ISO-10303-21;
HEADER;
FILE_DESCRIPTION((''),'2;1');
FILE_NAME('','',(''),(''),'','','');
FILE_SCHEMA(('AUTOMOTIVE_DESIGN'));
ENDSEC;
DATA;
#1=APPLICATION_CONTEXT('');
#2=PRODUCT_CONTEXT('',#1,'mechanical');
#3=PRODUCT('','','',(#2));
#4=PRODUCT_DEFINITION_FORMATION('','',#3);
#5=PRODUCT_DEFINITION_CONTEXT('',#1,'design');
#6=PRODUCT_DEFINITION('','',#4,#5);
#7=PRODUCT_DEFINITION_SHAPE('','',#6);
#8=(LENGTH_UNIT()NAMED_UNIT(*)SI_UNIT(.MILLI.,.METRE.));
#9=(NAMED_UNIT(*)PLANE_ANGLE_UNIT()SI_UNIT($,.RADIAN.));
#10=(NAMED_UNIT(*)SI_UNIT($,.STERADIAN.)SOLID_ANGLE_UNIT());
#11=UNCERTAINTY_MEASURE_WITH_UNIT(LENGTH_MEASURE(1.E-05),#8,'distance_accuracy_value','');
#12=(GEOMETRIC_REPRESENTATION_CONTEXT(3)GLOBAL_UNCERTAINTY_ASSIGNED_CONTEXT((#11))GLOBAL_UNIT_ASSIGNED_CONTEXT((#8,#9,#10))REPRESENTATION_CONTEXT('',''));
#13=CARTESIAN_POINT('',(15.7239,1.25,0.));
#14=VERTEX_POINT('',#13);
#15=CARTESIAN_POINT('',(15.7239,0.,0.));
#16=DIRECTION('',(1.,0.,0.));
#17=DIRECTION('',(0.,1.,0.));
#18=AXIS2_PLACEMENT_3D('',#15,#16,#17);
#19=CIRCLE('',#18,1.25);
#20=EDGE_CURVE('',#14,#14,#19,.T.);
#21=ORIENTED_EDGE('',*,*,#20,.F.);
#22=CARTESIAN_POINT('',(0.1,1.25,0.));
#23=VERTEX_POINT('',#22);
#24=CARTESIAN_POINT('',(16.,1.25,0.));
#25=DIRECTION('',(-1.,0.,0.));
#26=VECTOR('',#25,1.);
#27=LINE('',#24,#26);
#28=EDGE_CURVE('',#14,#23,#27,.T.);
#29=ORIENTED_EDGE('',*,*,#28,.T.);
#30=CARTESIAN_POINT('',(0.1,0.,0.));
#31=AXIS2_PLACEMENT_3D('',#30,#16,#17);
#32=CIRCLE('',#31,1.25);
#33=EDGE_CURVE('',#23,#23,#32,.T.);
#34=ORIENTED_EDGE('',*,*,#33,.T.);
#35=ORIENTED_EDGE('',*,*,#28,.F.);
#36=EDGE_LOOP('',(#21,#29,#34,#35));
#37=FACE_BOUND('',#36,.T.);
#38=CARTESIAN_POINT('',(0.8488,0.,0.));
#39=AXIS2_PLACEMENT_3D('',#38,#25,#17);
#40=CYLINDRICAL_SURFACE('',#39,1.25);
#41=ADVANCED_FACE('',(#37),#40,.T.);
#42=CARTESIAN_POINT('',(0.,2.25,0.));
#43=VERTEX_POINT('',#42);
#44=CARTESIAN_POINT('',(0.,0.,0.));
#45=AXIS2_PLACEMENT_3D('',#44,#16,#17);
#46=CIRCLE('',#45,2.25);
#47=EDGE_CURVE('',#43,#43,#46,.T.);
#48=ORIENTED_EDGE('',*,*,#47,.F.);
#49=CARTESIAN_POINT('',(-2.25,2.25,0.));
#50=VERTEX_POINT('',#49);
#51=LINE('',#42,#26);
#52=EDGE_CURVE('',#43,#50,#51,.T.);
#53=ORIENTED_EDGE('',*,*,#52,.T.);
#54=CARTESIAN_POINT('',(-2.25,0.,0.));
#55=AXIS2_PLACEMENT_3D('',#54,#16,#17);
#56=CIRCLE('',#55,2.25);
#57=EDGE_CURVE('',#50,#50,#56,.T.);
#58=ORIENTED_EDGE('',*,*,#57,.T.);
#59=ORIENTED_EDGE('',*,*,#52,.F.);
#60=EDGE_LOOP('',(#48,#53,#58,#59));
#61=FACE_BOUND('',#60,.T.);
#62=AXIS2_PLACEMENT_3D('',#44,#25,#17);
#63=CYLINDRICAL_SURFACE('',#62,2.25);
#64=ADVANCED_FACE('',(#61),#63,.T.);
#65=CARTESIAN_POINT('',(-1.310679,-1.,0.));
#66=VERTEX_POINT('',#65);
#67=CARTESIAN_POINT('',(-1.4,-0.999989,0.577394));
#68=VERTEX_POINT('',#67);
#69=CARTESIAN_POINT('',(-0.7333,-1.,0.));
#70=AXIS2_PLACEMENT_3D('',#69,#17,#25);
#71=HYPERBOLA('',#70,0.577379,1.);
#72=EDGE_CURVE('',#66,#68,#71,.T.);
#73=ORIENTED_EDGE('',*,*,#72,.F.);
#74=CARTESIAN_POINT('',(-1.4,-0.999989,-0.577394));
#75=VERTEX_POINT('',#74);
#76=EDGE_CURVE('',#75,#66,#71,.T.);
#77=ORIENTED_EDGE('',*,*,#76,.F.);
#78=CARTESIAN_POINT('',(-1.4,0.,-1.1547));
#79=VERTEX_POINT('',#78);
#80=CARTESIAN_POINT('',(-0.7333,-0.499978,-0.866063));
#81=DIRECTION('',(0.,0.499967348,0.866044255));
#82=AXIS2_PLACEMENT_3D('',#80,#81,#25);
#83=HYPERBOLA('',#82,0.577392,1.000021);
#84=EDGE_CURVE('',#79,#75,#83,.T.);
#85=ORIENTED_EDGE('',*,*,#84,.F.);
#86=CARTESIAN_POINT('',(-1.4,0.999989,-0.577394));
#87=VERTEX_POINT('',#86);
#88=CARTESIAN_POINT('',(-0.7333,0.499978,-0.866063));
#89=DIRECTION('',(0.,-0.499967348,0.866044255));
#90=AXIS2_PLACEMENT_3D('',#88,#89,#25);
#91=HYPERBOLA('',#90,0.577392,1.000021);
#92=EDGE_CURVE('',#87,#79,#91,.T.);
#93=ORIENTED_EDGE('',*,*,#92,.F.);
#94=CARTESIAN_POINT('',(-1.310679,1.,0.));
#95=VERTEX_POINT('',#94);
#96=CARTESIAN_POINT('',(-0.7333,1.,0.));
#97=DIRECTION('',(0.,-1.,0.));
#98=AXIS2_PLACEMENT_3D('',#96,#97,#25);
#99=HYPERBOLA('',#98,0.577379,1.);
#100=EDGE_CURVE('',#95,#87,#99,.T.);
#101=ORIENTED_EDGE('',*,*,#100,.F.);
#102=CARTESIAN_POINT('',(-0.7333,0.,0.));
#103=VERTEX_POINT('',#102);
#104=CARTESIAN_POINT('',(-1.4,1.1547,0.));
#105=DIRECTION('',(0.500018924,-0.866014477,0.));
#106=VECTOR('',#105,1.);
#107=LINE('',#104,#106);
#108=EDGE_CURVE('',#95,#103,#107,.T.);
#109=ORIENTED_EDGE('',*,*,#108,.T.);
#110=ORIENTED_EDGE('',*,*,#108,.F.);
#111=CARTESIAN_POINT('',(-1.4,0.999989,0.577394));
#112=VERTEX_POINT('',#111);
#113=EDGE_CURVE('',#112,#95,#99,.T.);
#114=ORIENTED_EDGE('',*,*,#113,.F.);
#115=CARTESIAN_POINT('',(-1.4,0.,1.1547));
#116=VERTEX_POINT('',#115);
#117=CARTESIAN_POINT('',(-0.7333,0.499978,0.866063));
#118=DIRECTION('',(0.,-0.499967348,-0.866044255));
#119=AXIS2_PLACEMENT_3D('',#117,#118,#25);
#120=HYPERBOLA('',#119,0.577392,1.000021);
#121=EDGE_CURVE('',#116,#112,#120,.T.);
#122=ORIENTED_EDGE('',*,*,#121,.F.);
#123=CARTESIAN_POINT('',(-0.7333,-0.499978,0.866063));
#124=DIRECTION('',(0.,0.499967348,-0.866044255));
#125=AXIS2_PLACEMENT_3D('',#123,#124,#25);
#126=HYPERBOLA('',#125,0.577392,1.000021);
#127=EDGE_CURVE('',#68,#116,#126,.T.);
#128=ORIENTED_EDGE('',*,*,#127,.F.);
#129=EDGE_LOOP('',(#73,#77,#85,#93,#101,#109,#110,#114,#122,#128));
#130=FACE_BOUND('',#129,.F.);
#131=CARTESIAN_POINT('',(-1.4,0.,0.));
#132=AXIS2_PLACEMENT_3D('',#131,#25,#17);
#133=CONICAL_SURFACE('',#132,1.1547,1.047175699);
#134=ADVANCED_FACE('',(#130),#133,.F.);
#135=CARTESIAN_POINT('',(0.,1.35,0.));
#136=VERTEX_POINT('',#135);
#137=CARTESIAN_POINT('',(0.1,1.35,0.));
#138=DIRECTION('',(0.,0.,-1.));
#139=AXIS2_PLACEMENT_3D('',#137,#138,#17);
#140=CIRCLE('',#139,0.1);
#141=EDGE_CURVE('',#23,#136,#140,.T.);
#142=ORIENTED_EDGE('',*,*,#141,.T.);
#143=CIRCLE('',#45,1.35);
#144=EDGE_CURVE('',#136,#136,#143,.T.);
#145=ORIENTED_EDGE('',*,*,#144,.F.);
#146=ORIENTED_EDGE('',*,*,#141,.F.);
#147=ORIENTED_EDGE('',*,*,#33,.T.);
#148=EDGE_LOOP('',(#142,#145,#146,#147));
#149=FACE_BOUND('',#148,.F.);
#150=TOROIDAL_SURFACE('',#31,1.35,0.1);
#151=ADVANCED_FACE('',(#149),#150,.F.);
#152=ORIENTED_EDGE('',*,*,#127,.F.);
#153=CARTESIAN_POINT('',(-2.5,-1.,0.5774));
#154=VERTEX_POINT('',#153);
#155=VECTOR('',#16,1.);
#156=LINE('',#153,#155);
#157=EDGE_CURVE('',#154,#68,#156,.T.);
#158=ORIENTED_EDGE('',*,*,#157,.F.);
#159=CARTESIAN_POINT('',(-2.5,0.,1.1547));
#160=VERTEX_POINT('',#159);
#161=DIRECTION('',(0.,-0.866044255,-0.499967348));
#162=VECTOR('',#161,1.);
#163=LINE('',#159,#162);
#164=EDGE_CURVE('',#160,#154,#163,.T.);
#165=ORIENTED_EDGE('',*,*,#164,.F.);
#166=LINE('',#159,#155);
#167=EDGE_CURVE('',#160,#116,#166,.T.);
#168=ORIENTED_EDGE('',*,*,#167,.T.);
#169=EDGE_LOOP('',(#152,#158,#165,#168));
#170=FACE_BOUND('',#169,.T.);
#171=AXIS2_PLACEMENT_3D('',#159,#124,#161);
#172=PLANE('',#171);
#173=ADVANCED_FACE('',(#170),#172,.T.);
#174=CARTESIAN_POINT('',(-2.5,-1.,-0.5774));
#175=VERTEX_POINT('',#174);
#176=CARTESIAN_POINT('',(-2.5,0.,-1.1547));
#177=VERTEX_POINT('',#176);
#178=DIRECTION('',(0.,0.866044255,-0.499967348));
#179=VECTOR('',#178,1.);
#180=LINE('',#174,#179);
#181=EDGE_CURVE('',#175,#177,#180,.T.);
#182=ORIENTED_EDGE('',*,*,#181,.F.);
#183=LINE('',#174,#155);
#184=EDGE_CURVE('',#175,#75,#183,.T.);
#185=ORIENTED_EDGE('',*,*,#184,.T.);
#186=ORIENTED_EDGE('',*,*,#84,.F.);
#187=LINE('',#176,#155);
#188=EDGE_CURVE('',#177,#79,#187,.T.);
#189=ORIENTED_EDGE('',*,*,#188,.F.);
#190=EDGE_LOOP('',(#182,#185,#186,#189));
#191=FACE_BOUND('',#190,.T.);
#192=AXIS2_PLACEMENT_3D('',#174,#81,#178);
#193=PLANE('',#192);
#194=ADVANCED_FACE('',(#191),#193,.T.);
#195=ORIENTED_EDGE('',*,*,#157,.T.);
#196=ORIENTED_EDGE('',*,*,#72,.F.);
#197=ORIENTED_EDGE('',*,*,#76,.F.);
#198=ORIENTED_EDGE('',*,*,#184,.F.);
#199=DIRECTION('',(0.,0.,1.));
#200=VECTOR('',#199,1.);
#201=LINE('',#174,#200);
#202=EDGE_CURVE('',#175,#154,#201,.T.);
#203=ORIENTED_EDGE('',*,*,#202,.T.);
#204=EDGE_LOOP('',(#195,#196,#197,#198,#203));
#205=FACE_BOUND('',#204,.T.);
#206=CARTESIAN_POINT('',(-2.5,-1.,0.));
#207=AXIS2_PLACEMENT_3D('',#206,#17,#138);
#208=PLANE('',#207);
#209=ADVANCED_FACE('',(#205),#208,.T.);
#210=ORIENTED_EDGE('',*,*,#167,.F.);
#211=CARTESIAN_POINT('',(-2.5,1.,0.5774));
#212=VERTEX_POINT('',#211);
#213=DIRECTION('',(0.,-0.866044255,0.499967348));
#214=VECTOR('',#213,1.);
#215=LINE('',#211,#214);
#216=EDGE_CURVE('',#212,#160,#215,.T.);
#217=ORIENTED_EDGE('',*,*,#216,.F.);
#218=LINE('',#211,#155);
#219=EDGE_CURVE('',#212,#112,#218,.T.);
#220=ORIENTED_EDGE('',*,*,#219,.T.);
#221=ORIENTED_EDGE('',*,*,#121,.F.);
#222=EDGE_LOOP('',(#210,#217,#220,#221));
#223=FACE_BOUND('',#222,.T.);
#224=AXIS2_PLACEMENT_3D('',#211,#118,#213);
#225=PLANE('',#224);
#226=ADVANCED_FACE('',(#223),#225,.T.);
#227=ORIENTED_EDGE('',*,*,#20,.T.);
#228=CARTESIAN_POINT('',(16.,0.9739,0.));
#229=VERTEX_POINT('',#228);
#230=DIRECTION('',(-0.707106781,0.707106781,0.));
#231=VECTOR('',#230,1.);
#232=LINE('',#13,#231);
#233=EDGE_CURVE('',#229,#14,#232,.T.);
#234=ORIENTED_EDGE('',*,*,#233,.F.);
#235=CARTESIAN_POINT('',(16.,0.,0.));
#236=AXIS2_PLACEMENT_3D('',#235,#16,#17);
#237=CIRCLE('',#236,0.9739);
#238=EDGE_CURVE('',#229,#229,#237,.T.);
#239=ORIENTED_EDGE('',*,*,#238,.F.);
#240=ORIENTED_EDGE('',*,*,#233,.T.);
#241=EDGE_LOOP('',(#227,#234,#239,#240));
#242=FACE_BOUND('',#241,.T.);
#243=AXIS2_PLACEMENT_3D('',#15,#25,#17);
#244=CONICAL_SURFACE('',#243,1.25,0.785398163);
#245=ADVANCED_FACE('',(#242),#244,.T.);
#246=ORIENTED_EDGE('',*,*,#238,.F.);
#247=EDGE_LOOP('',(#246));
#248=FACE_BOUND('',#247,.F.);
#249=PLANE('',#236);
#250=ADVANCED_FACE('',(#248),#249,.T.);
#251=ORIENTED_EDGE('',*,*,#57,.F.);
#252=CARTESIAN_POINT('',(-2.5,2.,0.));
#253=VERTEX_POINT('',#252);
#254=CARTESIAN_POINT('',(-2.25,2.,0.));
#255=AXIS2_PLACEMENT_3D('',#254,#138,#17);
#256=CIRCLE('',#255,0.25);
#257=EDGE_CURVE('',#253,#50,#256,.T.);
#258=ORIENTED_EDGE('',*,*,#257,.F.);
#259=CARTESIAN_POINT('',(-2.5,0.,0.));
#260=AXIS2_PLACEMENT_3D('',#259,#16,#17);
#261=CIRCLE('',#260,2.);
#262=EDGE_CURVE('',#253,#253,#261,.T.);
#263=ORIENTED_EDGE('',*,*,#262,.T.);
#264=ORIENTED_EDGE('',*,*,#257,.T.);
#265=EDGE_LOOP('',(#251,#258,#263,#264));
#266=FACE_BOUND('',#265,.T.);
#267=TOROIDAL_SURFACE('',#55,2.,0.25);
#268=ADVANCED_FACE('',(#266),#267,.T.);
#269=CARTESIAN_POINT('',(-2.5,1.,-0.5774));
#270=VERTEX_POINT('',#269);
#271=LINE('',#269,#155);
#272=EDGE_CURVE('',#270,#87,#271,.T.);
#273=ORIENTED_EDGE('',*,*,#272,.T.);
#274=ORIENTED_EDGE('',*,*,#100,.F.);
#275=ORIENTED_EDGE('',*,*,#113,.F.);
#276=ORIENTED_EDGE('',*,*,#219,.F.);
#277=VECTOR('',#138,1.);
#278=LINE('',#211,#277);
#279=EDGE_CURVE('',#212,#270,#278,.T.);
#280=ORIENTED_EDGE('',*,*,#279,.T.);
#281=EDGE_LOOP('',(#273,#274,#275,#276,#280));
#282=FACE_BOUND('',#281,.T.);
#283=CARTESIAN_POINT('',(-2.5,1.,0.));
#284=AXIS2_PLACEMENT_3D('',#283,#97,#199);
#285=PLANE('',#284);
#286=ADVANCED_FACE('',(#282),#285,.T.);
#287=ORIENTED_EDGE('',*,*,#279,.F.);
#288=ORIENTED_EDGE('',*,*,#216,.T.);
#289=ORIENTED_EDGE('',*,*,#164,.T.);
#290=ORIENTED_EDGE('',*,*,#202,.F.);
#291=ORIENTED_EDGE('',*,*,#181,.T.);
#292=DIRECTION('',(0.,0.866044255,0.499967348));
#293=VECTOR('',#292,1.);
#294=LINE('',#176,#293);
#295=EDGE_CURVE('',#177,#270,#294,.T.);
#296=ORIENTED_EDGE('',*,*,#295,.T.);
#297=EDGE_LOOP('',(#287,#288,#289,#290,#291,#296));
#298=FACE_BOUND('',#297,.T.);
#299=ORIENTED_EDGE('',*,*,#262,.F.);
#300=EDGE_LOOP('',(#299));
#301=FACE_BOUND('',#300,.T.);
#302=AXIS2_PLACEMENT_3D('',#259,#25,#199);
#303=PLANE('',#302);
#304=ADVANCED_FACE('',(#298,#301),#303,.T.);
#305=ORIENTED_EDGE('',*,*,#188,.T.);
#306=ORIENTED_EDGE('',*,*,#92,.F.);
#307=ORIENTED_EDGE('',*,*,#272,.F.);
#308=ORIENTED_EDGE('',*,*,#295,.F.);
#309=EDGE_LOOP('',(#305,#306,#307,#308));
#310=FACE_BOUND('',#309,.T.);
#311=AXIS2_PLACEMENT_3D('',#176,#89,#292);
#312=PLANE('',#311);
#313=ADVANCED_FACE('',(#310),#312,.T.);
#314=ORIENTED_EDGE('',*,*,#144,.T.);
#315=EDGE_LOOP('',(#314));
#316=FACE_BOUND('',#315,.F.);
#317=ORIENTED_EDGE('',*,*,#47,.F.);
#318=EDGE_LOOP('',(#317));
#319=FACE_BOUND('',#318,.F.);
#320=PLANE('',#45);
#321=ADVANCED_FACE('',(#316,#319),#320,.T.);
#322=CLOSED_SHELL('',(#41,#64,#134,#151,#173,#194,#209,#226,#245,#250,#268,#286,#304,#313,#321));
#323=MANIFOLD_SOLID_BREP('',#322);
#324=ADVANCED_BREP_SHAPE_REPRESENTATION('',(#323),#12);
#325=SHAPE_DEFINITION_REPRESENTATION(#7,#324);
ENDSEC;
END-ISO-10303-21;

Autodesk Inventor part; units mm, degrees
ref_plane "YZ Plane" through (0, 0, 0) normal (1, 0, 0) x (0, 1, 0)
ref_plane "XZ Plane" through (0, 0, 0) normal (0, 1, 0) x (-1, 0, 0)
sketch "Skizze1" plane through (0, 0, 0) normal (0, 0, 1) x (1, 0, 0)
  line L0 (-0.7333, 0) -> (16, 0)
  line L1 (16, 0) -> (16, 1.25)
  line L2 (16, 1.25) -> (1.125, 1.25)
  line L3 (1.125, 1.25) -> (0.8488, 1.25)
  line L4 (0.8488, 1.25) -> (0, 1.25)
  line L5 (0, 1.25) -> (0, 2.25)
  line L6 (0, 2.25) -> (-2.5, 2.25)
  line L7 (-2.5, 2.25) -> (-2.5, 1.1547)
  line L8 (-2.5, 1.1547) -> (-1.4, 1.1547)
  line L9 (-1.4, 1.1547) -> (-0.7333, 0)
  line L10 (-6.2, 0) -> (19.7, 0) projected
  line L11 (0, -0.45) -> (0, 2.7) projected
  line L12 (1.125, 1.25) -> (0, 1.25) construction
  dimension "d1" = 14.875
  dimension "d2" = 0.2762
  dimension "d3" = 2.5
  dimension "d4" = 1.1
  dimension "d5" = 60
  dimension "d6" = 2.5
  dimension "d7" = 2.5
  dimension "d8" = 2.3094
  dimension "d9" = 4.5
  dimension "d26" = 16
revolve "Körper" add sketch "Skizze1" angle 360 about axis through (-0.7333, 0, 0) along (1, 0, 0)
sketch "Skizze2" plane through (-2.5, 0, 0) normal (-1, 0, 0) x (0, 0, 1)
  circle A0 centre (0, 0) radius 1.1547 projected
  line L0 (0, -3.15) -> (0, 3.15) projected
  line L1 (-3.15, 0) -> (3.15, 0) projected
  line L2 (1.1547, 0) -> (0.5774, -1)
  line L3 (0.5774, -1) -> (-0.5774, -1)
  line L4 (-0.5774, -1) -> (-1.1547, 0)
  line L5 (-1.1547, 0) -> (-0.5774, 1)
  line L6 (-0.5774, 1) -> (0.5774, 1)
  line L7 (0.5774, 1) -> (1.1547, 0)
extrude "Loch" add sketch "Skizze2" against normal up to next contours L7 A0 | A0 L2 | L6 L0 A0 | A0 L0 L3 | L0 L6 A0 | A0 L3 L0 | L4 A0 | A0 L5
fillet "Rundung1" radius 0.25 1 edges at (-2.5, -2.25, 0)
thread "Gewinde" size "M2.5x0.45" class "6g" standard "ISO Metric profile" length 14.875
chamfer "Fase1" distance 0.2761 distance2 0.2761 1 edges at (16, -1.25, 0) measured on face at (16, -0.3871, -0.3429)
ref_plane "Work Plane1" through (29, 0, 0) normal (0, -1, 0) x (1, 0, 0)
fillet "Fillet2" radius 0.1 1 edges at (0, -1.25, 0)
equation "\"d1\" = GEL"
equation "\"d3\" = KOH"
equation "\"d4\" = INTI"
equation "\"d6\" = GD"
equation "\"d7\" = BDM"
equation "\"d8\" = 1.1547 * SW"
equation "\"d9\" = KOD"
equation "\"d26\" = NLG"
equation "\"d30\" = R"
equation "\"d17\" = RR"
equation "\"d13\" = GEL"
equation "\"d15\" = -0.5 * SPD + 0.5 * GD"
equation "\"d16\" = GUL"
equation "\"GD\" = NND"
equation "\"NLG\" = 16"
equation "\"GEL\" = 14.875"
equation "\"KOD\" = 4.5"
equation "\"KOH\" = 2.5"
equation "\"INTI\" = 1.1"
equation "\"GAL\" = 0.61345 * PTC"
equation "\"GUL\" = 0.61345 * PTC"
equation "\"BDM\" = NND"
equation "\"SW\" = 2"
equation "\"RR\" = 0.25"
equation "\"SPD\" = NND - 1.2269 * PTC"
equation "\"R\" = 0.1"
equation "\"TOA\" = 30deg"
equation "\"GD1\" = THREADDIA - 1.2269 * PTC"
equation "\"THREADDIA\" = 2.5"
equation "\"FAWI\" = 45deg"
equation "\"ANG\" = 120deg"
equation "\"PTC\" = 0.45"
equation "\"NND\" = 2.5"
equation "\"E0\" = 1.155 * SW"
properties part number "DIN 912 - M2,5 x 16" material "Stahl, weich"
